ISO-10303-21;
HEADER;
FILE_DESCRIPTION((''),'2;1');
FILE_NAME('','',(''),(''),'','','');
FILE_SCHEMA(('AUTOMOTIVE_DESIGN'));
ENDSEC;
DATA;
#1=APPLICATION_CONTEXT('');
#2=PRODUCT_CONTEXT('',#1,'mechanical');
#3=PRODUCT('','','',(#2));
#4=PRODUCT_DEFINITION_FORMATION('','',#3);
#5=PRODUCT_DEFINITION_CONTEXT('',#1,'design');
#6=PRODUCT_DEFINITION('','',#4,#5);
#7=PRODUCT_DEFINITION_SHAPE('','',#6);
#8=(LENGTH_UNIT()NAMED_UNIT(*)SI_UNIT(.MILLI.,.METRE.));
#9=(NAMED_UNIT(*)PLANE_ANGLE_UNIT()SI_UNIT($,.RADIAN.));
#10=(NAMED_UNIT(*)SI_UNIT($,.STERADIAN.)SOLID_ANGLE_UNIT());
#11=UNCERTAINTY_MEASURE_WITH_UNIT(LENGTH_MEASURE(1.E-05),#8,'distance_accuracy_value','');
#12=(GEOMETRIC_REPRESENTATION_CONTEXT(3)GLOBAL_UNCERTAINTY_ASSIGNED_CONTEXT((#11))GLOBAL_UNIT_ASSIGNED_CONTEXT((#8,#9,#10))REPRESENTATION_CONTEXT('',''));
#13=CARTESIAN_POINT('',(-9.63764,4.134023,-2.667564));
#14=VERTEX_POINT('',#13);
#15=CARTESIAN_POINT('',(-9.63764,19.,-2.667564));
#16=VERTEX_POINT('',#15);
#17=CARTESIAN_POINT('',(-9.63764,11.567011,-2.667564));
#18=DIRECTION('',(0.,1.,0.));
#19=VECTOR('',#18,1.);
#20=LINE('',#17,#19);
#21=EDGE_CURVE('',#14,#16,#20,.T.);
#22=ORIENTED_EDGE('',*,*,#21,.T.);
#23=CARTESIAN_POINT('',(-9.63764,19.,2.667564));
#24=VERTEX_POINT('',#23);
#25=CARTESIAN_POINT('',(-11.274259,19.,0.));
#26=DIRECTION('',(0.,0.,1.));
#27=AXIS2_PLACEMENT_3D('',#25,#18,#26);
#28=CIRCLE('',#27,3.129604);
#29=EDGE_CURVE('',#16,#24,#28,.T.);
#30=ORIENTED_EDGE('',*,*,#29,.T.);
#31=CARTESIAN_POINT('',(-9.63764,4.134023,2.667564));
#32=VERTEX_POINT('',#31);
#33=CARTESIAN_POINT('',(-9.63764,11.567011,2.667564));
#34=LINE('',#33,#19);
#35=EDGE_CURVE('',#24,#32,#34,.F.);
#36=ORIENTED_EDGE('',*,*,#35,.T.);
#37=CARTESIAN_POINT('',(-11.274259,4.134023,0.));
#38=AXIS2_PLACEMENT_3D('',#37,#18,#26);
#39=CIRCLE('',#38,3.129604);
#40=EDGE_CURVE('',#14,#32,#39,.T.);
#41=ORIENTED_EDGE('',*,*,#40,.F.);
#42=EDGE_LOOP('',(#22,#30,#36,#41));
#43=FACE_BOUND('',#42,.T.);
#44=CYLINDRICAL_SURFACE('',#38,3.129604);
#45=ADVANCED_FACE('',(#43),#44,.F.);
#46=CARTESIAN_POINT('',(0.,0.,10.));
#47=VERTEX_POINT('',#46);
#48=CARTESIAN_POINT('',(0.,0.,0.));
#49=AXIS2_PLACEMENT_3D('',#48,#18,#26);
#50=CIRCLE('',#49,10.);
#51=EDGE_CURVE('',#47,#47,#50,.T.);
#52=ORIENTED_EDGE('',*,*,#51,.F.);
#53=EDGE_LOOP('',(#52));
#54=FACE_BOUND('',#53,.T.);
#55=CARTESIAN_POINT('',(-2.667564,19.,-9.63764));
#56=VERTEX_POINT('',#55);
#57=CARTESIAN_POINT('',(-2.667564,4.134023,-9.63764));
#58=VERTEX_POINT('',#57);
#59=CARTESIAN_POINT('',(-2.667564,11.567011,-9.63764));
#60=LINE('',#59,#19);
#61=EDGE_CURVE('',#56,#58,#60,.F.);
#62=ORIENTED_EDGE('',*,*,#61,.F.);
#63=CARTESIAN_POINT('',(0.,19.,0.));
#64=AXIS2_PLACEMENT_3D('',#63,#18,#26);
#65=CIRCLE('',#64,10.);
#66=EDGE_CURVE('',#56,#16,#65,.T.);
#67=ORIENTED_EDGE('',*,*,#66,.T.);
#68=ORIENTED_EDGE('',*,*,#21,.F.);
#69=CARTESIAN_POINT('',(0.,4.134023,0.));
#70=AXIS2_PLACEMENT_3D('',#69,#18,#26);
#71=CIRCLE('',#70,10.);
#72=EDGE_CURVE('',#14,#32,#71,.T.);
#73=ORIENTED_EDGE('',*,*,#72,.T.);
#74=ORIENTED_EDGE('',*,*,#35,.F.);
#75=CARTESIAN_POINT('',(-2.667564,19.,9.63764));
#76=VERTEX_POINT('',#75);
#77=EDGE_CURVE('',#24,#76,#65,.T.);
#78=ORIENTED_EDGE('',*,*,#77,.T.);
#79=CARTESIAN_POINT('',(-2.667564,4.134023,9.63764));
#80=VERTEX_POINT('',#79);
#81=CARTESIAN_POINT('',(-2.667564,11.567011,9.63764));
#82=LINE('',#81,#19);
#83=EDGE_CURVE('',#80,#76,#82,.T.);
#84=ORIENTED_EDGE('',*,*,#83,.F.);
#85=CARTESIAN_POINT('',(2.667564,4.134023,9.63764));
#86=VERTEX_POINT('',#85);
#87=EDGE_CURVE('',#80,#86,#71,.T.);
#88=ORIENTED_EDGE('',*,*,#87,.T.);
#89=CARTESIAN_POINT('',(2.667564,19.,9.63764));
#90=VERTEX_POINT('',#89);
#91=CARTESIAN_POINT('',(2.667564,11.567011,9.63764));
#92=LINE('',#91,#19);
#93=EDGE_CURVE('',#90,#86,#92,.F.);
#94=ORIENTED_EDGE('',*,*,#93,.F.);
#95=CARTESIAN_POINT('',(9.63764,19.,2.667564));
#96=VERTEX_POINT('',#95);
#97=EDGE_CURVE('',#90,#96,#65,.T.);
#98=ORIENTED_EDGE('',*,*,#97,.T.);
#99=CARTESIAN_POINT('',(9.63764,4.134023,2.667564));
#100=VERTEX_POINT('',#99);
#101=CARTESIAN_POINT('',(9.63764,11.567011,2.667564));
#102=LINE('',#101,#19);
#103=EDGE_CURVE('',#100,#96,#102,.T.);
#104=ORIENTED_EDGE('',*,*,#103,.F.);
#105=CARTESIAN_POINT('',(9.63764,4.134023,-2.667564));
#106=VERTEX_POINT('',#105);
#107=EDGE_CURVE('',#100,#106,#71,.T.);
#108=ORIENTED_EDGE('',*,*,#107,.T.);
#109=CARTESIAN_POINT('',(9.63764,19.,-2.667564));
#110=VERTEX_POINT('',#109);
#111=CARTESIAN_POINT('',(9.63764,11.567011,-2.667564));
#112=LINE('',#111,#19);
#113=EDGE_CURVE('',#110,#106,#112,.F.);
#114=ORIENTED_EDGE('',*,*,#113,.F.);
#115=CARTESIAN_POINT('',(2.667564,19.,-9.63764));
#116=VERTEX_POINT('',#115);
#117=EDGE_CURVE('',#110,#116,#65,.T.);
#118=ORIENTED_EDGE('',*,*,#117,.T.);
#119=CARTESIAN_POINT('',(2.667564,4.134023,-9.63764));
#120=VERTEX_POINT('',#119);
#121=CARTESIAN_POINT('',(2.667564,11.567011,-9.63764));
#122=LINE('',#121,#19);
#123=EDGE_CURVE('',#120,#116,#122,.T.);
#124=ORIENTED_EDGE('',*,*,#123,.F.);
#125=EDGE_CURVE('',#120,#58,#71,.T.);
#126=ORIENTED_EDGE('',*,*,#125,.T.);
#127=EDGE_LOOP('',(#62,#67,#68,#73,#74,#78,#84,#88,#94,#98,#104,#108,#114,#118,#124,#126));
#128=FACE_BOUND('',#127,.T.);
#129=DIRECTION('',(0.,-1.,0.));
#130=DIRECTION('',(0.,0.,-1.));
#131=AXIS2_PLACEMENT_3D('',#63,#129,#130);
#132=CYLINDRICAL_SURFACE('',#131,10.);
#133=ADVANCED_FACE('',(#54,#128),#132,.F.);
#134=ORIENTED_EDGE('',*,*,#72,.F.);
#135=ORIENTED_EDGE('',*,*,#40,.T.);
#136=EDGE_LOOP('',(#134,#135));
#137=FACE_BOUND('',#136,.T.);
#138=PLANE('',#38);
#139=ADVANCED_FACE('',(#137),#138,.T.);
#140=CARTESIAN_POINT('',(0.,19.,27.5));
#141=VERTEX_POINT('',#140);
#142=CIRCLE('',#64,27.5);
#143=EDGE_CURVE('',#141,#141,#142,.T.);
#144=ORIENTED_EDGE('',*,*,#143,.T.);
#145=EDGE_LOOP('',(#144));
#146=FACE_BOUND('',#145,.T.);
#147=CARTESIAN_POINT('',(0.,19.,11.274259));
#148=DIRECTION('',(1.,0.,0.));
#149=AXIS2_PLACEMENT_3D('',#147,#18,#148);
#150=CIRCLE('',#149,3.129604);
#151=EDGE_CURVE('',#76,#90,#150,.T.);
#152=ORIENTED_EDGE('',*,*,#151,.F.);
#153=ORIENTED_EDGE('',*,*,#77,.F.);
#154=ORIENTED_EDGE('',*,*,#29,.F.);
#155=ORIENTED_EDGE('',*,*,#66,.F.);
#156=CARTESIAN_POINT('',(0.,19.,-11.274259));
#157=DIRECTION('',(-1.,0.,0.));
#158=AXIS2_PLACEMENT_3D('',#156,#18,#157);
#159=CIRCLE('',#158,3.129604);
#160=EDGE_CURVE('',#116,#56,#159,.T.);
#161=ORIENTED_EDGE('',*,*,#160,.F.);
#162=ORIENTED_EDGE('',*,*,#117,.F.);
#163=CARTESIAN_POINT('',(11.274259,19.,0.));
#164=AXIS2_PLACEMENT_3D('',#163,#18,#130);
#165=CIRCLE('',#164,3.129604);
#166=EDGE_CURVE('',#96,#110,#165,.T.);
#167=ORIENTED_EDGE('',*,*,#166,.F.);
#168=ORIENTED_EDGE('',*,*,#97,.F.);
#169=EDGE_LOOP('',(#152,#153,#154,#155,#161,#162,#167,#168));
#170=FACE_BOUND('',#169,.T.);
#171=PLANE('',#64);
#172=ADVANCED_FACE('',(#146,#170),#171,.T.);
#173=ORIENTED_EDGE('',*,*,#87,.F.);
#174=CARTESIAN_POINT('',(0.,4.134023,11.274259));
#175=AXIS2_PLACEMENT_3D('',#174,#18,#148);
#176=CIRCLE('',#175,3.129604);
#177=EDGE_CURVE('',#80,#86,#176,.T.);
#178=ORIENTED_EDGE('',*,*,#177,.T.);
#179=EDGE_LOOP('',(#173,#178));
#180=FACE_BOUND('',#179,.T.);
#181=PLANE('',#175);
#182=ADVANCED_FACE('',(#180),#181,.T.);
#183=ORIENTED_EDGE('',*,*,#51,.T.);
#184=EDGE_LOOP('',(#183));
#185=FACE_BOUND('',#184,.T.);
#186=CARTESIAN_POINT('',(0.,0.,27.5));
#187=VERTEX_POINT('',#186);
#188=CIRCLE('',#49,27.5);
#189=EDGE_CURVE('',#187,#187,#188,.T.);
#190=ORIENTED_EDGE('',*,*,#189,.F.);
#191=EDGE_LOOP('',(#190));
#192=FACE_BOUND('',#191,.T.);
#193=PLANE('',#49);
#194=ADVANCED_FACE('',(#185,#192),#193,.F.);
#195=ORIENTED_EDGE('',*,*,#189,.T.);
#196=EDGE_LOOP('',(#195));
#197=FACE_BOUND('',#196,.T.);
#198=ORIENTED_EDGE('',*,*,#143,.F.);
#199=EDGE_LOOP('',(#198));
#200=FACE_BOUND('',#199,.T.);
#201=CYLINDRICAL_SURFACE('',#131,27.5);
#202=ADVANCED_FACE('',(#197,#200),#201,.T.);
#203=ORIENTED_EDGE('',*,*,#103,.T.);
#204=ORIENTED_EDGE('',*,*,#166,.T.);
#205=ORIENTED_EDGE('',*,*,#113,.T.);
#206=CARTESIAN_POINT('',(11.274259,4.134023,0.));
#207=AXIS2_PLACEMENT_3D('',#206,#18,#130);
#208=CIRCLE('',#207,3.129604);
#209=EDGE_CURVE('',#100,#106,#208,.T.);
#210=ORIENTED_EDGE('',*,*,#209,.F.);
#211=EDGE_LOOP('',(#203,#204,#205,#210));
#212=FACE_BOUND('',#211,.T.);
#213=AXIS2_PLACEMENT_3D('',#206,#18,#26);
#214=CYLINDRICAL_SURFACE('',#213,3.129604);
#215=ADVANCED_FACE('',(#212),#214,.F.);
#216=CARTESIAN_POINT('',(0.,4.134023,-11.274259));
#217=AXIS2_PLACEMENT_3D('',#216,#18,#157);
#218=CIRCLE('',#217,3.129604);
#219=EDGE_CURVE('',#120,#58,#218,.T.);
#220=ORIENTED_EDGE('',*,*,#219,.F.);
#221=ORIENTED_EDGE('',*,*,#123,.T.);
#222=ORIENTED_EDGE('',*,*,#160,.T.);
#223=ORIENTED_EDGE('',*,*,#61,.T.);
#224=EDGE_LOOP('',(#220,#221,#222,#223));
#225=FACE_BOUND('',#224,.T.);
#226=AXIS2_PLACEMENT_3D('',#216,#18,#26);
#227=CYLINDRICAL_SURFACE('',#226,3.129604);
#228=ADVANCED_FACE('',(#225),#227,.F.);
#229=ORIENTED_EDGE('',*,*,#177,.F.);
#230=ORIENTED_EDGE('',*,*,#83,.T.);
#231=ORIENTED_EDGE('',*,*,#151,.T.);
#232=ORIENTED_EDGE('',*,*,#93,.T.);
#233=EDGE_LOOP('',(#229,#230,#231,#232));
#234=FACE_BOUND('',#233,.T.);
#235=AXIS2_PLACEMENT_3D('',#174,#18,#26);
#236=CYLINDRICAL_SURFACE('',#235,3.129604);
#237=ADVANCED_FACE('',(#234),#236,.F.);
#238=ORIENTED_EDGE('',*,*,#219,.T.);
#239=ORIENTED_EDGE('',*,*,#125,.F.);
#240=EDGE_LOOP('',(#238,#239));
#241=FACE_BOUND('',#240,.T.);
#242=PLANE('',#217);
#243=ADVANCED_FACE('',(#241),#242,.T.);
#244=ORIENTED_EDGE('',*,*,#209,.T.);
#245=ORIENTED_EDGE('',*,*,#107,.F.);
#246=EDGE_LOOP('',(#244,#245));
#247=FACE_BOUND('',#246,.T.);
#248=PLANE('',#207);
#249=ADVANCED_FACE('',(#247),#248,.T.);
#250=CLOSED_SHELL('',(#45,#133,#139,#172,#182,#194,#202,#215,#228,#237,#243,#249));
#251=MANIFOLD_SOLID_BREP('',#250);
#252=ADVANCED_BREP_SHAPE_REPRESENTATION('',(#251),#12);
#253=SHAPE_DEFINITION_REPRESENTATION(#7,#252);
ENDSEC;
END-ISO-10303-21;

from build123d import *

# Parameters (mm, degrees)
SKETCH1_R           = 27.5
BOSS_EXTRUDE1_DEPTH = 19
SKETCH2_R           = 10
CUT_EXTRUDE1_DEPTH  = 44.283946216
SKETCH3_R           = 3.129604359
CUT_EXTRUDE2_DEPTH  = 14.865977008
CIRPATTERN1_COUNT   = 4


with BuildPart() as part:
    # Sketch1 → Boss-Extrude1 (new body)
    with BuildSketch(Plane(origin=(0, 0, 0), x_dir=(1, 0, 0), z_dir=(0, 1, 0))):
        Circle(SKETCH1_R)
    extrude(amount=BOSS_EXTRUDE1_DEPTH)

    # Sketch2 → Cut-Extrude1 (cut, through all)
    with BuildSketch(Plane(origin=(0, 0, 0), x_dir=(1, 0, 0), z_dir=(0, 1, 0))):
        Circle(SKETCH2_R)
    extrude(amount=CUT_EXTRUDE1_DEPTH, mode=Mode.SUBTRACT)

    # Sketch3 → Cut-Extrude2 (cut)
    with BuildSketch(Plane(origin=(0, 19, 0), x_dir=(1, 0, 0), z_dir=(0, 1, 0))):
        with Locations((-11.274259426, 0)):
            Circle(SKETCH3_R)
    cut_extrude2 = extrude(amount=-CUT_EXTRUDE2_DEPTH, mode=Mode.SUBTRACT)

    # CirPattern1: Cut-Extrude2 ×4 about axis
    cirpattern1_axis = Axis((0, 0, 0), (0, 1, 0))
    for i in range(1, CIRPATTERN1_COUNT):
        add(cut_extrude2.rotate(cirpattern1_axis, i * 360 / CIRPATTERN1_COUNT), mode=Mode.SUBTRACT)


solid = part.part
